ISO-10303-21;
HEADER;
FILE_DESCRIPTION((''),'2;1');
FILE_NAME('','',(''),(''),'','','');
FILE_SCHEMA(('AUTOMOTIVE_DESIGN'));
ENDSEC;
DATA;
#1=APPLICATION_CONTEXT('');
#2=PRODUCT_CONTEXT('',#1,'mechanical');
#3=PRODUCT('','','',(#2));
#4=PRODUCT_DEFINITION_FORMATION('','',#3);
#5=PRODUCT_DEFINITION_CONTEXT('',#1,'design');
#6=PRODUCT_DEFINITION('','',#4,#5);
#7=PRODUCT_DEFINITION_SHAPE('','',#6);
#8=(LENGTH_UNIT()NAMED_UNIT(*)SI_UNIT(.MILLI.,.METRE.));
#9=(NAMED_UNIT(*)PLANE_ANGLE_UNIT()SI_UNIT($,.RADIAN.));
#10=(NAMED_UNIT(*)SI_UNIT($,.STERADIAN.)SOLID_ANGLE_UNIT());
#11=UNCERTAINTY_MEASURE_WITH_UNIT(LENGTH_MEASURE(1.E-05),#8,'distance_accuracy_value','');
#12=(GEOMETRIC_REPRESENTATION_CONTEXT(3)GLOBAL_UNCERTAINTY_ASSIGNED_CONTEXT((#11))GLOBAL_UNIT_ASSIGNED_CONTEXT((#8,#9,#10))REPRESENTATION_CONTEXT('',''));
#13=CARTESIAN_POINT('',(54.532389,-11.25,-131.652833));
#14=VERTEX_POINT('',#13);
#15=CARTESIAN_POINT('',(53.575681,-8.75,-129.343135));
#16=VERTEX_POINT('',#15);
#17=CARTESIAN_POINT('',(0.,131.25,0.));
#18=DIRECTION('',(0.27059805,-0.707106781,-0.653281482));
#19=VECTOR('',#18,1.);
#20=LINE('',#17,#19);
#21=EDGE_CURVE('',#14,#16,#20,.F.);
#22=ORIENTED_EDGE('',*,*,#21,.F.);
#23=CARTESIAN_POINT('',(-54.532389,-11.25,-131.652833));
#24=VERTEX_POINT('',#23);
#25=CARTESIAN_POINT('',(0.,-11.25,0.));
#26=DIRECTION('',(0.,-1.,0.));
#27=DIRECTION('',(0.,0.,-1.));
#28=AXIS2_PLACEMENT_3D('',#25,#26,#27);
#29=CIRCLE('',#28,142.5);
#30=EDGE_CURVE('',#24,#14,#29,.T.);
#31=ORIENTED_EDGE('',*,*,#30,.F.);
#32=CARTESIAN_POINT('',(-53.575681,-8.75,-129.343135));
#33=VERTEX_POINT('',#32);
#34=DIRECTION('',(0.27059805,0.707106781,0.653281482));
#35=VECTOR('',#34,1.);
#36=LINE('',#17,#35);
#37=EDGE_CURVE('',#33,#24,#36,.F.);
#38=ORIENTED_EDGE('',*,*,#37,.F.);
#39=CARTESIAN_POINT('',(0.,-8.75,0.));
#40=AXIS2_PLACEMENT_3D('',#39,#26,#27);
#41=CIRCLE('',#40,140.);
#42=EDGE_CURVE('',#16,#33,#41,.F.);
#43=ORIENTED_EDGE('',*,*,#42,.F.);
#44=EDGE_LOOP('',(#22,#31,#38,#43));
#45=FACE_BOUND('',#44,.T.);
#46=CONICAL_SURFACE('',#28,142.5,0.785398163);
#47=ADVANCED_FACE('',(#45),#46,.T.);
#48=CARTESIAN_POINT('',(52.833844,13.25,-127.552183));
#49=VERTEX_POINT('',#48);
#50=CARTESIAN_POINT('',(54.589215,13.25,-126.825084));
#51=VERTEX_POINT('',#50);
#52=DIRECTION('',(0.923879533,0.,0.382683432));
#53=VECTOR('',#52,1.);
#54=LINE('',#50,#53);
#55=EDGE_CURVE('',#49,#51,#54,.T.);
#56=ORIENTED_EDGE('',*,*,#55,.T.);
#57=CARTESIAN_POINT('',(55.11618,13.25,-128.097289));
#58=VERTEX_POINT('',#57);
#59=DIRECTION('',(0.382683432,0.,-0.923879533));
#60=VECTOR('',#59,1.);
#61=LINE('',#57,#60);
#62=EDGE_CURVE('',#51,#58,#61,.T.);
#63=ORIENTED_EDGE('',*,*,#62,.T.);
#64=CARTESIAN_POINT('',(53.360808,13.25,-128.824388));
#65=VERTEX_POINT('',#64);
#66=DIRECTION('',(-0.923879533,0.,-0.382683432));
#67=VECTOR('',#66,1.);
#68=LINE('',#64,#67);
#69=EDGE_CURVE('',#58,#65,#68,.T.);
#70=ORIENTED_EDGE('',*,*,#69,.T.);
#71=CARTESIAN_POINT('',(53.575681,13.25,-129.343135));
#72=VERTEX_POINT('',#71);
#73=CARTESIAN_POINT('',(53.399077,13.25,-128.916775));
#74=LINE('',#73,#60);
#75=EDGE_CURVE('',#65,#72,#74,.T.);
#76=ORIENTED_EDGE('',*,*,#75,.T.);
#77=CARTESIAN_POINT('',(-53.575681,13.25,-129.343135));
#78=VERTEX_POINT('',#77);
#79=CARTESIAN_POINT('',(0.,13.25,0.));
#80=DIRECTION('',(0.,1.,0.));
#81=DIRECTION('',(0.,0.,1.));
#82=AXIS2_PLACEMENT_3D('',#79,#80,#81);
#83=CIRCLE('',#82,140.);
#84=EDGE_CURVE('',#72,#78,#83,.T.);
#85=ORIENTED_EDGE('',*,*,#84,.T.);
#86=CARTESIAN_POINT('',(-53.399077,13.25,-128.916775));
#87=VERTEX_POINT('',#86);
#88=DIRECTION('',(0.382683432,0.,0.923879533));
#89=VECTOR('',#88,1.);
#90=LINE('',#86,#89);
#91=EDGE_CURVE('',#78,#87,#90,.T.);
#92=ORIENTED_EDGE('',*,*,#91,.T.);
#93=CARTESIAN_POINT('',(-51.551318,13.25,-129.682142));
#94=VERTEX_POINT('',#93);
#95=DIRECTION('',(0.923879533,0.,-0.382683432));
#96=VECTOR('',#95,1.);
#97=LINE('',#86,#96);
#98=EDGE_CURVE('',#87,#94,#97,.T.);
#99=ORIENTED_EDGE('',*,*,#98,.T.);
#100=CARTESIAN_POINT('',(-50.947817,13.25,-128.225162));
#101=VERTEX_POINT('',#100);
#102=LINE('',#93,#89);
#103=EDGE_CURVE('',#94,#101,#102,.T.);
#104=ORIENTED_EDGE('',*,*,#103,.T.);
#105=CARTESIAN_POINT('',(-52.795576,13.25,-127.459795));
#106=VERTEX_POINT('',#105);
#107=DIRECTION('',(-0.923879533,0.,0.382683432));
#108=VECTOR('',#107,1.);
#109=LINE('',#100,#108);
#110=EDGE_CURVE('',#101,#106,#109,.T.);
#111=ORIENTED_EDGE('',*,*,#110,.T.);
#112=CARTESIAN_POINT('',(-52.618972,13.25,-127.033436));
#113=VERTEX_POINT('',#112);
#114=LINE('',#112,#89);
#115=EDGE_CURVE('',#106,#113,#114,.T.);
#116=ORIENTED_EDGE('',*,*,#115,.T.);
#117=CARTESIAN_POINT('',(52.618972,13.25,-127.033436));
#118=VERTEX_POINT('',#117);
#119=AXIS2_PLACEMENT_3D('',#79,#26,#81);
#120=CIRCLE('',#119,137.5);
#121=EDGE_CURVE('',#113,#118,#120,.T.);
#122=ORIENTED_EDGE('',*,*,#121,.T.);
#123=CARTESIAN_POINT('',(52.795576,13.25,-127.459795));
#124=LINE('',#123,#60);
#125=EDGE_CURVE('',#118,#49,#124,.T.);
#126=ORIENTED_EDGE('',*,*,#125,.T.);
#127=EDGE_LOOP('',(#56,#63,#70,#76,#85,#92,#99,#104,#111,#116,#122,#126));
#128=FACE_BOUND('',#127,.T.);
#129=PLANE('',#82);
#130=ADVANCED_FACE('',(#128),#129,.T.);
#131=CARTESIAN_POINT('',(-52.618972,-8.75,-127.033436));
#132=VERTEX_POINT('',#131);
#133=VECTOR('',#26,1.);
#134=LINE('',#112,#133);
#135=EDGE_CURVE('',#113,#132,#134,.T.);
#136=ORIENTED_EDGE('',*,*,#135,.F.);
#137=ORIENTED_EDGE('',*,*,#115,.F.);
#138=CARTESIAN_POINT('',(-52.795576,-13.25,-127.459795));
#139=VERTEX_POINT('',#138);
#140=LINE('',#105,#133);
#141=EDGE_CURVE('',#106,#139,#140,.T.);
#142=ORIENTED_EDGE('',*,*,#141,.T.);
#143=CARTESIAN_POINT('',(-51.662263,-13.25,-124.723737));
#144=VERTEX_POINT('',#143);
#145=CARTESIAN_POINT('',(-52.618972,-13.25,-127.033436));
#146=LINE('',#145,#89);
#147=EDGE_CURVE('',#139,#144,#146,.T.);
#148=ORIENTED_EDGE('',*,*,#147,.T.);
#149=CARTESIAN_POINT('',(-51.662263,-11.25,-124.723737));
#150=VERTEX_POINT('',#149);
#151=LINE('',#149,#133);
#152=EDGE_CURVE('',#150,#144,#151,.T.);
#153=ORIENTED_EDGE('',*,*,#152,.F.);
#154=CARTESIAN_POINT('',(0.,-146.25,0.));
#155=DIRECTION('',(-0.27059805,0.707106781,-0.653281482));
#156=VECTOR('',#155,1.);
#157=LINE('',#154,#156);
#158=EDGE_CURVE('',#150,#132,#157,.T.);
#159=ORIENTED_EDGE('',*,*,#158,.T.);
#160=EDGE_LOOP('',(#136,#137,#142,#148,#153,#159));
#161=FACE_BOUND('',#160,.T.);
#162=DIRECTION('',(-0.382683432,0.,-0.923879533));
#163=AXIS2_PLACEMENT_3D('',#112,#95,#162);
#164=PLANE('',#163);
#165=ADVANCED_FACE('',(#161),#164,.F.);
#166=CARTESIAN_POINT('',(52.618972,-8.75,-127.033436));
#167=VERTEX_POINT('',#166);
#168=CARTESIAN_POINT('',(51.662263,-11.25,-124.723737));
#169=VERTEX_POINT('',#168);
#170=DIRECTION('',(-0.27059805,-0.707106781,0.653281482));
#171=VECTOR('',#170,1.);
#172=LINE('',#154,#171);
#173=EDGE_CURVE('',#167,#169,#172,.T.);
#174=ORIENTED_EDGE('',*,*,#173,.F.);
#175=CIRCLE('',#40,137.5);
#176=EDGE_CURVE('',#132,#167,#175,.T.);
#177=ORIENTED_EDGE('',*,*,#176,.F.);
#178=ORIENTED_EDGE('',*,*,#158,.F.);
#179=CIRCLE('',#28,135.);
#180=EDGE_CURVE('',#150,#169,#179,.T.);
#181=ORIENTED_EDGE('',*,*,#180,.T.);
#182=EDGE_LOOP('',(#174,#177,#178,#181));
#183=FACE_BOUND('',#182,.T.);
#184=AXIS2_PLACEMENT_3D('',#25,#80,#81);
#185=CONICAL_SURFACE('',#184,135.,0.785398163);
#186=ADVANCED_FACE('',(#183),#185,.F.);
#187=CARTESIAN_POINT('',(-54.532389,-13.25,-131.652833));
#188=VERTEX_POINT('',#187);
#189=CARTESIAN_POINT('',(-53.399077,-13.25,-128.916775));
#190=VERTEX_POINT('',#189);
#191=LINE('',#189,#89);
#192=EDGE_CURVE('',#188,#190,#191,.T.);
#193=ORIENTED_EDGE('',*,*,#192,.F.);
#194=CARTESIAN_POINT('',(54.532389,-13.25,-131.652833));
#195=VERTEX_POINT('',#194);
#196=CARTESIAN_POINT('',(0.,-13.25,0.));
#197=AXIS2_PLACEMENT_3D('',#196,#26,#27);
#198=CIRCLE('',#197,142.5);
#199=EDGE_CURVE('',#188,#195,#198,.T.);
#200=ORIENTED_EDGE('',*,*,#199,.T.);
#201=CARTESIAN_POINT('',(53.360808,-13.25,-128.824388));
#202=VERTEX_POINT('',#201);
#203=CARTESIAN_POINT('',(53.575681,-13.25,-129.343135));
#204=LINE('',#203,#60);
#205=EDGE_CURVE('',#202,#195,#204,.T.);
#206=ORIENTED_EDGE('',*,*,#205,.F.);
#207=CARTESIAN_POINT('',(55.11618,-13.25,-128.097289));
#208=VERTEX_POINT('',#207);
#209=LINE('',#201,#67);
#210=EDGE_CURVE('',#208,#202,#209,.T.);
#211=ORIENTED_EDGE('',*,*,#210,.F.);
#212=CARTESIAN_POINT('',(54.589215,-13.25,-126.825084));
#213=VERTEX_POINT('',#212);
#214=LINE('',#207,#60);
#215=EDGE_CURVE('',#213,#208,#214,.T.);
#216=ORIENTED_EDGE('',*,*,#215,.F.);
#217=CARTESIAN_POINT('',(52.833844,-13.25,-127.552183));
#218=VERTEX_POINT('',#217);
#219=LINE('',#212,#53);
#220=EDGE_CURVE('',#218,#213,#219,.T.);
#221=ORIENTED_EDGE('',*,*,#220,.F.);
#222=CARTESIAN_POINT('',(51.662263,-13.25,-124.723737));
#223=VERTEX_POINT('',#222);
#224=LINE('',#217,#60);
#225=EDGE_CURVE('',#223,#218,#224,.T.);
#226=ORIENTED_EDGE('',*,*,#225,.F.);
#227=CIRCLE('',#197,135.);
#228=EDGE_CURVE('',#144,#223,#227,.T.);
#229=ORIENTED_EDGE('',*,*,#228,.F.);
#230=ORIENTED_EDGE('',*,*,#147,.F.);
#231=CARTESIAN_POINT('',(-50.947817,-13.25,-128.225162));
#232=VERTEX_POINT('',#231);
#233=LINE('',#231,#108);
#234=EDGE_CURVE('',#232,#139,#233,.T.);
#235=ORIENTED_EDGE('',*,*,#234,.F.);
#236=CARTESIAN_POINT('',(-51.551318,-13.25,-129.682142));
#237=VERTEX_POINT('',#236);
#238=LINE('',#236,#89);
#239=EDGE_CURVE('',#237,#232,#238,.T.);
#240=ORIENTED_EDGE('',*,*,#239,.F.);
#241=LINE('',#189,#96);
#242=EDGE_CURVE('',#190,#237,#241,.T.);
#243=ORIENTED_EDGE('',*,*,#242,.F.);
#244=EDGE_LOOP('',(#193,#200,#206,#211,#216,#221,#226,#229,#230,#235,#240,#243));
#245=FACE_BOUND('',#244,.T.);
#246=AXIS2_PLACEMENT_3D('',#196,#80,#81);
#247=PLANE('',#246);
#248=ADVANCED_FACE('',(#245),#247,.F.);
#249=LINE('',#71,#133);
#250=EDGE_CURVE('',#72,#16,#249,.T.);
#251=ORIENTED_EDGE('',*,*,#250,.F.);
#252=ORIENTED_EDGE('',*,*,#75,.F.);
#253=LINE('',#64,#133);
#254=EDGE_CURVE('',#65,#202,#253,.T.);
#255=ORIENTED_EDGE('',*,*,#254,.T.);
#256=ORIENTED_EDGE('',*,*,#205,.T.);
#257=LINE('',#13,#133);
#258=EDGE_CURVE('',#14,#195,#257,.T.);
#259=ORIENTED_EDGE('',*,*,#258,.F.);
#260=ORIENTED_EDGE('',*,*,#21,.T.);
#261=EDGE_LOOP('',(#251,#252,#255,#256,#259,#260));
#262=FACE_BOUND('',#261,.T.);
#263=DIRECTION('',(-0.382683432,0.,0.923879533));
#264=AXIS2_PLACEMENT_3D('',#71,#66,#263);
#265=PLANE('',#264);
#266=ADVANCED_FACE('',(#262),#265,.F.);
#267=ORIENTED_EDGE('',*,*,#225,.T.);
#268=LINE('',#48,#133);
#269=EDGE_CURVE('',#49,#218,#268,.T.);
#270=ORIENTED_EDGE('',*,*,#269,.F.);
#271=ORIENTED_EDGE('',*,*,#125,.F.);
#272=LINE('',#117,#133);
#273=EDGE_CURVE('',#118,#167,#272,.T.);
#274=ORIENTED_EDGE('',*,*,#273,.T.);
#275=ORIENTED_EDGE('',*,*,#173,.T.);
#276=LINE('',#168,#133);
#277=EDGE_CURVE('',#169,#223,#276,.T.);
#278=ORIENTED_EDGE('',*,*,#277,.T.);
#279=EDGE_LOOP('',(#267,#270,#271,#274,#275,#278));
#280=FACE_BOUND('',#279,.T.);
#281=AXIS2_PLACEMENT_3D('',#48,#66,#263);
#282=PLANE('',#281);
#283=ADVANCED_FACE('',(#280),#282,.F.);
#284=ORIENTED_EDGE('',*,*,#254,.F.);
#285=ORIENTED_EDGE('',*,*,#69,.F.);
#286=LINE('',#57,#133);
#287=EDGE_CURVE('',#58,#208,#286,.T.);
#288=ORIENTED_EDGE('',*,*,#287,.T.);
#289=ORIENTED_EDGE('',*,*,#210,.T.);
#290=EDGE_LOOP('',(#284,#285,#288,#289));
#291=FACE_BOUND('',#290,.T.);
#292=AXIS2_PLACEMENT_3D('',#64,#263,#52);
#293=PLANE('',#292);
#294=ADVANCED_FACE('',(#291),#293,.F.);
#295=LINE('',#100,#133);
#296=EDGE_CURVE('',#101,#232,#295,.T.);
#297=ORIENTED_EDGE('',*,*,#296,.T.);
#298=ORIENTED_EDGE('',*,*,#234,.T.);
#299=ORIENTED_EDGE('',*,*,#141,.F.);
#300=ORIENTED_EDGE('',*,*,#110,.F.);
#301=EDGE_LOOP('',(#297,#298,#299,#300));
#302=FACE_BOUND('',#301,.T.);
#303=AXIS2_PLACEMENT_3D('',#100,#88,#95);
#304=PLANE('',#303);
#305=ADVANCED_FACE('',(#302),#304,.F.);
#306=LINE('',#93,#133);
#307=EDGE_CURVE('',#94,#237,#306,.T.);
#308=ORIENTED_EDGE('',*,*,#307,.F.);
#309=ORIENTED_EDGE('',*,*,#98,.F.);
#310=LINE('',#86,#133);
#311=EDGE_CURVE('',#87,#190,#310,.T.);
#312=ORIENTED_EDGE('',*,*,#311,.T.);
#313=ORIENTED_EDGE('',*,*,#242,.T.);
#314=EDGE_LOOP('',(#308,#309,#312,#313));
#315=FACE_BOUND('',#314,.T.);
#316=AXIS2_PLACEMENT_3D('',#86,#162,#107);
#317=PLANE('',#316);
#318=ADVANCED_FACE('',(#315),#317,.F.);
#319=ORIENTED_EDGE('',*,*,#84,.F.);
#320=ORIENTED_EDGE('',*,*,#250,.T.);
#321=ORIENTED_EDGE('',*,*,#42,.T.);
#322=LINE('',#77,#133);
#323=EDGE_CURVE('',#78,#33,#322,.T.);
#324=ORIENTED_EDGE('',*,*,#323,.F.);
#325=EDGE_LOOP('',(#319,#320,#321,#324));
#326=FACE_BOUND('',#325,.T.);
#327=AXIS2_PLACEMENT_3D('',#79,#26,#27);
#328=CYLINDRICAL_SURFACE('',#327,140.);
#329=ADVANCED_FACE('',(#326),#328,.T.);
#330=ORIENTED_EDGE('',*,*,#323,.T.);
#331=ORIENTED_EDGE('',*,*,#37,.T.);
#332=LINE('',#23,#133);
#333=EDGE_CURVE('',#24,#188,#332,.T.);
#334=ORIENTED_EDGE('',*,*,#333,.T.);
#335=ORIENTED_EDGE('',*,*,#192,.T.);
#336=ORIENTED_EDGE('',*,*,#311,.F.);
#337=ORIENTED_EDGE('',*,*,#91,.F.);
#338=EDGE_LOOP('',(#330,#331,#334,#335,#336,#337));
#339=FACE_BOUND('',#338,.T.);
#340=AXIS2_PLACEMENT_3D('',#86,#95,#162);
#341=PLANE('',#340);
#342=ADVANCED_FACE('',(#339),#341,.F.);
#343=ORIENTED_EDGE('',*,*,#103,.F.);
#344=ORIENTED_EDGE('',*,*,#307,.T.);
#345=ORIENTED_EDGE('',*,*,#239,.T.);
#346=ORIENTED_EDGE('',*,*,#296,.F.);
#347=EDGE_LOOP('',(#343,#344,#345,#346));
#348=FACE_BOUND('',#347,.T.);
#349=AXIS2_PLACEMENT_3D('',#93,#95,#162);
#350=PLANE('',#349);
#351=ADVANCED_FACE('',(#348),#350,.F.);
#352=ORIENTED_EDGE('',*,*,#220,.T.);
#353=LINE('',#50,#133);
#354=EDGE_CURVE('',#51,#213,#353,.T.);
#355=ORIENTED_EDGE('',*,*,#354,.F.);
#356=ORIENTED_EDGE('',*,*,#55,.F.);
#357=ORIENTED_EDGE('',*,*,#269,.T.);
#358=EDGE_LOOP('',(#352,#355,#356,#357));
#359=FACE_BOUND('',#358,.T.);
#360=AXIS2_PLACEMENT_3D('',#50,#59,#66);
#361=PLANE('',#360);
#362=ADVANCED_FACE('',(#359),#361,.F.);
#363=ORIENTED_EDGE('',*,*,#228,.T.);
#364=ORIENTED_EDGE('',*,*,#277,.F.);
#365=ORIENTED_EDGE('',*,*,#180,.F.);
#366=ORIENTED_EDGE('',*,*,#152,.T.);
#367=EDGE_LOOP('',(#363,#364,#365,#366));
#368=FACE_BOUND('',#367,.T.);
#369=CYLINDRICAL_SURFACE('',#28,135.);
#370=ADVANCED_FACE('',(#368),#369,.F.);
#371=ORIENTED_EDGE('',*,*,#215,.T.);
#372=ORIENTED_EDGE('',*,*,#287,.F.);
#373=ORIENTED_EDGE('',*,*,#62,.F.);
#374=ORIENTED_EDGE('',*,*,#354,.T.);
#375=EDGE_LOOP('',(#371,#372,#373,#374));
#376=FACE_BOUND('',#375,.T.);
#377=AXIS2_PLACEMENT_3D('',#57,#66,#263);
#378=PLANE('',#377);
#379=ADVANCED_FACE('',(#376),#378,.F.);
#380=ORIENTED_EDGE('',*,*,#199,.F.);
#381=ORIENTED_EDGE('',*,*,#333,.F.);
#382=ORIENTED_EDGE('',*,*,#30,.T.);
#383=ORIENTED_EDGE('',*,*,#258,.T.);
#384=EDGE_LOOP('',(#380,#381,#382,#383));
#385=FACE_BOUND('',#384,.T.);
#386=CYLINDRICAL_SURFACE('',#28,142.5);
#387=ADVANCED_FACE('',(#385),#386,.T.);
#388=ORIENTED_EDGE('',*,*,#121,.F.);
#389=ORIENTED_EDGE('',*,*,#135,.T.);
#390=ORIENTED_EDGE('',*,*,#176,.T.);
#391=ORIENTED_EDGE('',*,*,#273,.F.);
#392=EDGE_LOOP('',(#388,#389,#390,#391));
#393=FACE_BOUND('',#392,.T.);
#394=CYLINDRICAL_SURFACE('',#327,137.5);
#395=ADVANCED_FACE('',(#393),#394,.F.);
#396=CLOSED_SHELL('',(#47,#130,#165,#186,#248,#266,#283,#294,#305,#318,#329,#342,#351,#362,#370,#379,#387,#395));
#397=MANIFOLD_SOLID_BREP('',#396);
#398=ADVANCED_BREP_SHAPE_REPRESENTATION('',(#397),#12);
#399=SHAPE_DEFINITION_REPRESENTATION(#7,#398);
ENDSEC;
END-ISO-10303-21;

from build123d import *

# Parameters (mm, degrees)
BOSS_EXTRUDE1_DEPTH = 13.25
BOSS_EXTRUDE2_START = -2
BOSS_EXTRUDE2_DEPTH = 2
CHAMFER2_SIZE       = 2.5


with BuildPart() as part:
    # Sketch2 → Boss-Extrude1 (new, symmetric)
    with BuildSketch(Plane(origin=(0, 0, 0), x_dir=(1, 0, 0), z_dir=(0, 1, 0))):
        with BuildLine():
            Line((-52.61897195, 127.03343572), (-52.795575656, 127.459794782))
            Line((-52.795575656, 127.459794782), (-50.947816591, 128.225161647))
            Line((-50.947816591, 128.225161647), (-51.55131776, 129.682142355))
            Line((-51.55131776, 129.682142355), (-53.399076825, 128.91677549))
            Line((-53.399076825, 128.91677549), (-53.575680531, 129.343134552))
            ThreePointArc((-53.575680531, 129.343134552), (0, 140), (53.575680531, 129.343134552))
            Line((53.575680531, 129.343134552), (53.399076825, 128.91677549))
            Line((53.399076825, 128.91677549), (53.360808482, 128.824387537))
            Line((53.360808482, 128.824387537), (55.116179594, 128.097289015))
            Line((55.116179594, 128.097289015), (54.589215111, 126.825084214))
            Line((54.589215111, 126.825084214), (52.833843999, 127.552182735))
            Line((52.833843999, 127.552182735), (52.795575656, 127.459794782))
            Line((52.795575656, 127.459794782), (52.61897195, 127.03343572))
            ThreePointArc((52.61897195, 127.03343572), (0, 137.5), (-52.61897195, 127.03343572))
        make_face()
    extrude(amount=BOSS_EXTRUDE1_DEPTH, both=True)

    # Sketch3 → Boss-Extrude2 (add)
    with BuildSketch(Plane.XZ.offset(13.25).offset(BOSS_EXTRUDE2_START)):
        with BuildLine():
            ThreePointArc((53.575680531, -129.343134552), (0, -140), (-53.575680531, -129.343134552))
            Line((-53.575680531, -129.343134552), (-54.532389112, -131.652833383))
            ThreePointArc((-54.532389112, -131.652833383), (0, -142.5), (54.532389112, -131.652833383))
            Line((54.532389112, -131.652833383), (53.575680531, -129.343134552))
        make_face()
        with BuildLine():
            Line((-51.662263369, -124.723736889), (-52.61897195, -127.03343572))
            ThreePointArc((-52.61897195, -127.03343572), (0, -137.5), (52.61897195, -127.03343572))
            Line((52.61897195, -127.03343572), (51.662263369, -124.723736889))
            ThreePointArc((51.662263369, -124.723736889), (0, -135), (-51.662263369, -124.723736889))
        make_face()
    extrude(amount=BOSS_EXTRUDE2_DEPTH)

    # Chamfer2
    chamfer2_edges = [part.edges().sort_by_distance(p)[0] for p in [
        (0, -11.25, -137.5),
        (0, -11.25, -140),
    ]]
    chamfer(chamfer2_edges, length=CHAMFER2_SIZE - 0.0001)  # a hair under: the kernel refuses the full size


solid = part.part
